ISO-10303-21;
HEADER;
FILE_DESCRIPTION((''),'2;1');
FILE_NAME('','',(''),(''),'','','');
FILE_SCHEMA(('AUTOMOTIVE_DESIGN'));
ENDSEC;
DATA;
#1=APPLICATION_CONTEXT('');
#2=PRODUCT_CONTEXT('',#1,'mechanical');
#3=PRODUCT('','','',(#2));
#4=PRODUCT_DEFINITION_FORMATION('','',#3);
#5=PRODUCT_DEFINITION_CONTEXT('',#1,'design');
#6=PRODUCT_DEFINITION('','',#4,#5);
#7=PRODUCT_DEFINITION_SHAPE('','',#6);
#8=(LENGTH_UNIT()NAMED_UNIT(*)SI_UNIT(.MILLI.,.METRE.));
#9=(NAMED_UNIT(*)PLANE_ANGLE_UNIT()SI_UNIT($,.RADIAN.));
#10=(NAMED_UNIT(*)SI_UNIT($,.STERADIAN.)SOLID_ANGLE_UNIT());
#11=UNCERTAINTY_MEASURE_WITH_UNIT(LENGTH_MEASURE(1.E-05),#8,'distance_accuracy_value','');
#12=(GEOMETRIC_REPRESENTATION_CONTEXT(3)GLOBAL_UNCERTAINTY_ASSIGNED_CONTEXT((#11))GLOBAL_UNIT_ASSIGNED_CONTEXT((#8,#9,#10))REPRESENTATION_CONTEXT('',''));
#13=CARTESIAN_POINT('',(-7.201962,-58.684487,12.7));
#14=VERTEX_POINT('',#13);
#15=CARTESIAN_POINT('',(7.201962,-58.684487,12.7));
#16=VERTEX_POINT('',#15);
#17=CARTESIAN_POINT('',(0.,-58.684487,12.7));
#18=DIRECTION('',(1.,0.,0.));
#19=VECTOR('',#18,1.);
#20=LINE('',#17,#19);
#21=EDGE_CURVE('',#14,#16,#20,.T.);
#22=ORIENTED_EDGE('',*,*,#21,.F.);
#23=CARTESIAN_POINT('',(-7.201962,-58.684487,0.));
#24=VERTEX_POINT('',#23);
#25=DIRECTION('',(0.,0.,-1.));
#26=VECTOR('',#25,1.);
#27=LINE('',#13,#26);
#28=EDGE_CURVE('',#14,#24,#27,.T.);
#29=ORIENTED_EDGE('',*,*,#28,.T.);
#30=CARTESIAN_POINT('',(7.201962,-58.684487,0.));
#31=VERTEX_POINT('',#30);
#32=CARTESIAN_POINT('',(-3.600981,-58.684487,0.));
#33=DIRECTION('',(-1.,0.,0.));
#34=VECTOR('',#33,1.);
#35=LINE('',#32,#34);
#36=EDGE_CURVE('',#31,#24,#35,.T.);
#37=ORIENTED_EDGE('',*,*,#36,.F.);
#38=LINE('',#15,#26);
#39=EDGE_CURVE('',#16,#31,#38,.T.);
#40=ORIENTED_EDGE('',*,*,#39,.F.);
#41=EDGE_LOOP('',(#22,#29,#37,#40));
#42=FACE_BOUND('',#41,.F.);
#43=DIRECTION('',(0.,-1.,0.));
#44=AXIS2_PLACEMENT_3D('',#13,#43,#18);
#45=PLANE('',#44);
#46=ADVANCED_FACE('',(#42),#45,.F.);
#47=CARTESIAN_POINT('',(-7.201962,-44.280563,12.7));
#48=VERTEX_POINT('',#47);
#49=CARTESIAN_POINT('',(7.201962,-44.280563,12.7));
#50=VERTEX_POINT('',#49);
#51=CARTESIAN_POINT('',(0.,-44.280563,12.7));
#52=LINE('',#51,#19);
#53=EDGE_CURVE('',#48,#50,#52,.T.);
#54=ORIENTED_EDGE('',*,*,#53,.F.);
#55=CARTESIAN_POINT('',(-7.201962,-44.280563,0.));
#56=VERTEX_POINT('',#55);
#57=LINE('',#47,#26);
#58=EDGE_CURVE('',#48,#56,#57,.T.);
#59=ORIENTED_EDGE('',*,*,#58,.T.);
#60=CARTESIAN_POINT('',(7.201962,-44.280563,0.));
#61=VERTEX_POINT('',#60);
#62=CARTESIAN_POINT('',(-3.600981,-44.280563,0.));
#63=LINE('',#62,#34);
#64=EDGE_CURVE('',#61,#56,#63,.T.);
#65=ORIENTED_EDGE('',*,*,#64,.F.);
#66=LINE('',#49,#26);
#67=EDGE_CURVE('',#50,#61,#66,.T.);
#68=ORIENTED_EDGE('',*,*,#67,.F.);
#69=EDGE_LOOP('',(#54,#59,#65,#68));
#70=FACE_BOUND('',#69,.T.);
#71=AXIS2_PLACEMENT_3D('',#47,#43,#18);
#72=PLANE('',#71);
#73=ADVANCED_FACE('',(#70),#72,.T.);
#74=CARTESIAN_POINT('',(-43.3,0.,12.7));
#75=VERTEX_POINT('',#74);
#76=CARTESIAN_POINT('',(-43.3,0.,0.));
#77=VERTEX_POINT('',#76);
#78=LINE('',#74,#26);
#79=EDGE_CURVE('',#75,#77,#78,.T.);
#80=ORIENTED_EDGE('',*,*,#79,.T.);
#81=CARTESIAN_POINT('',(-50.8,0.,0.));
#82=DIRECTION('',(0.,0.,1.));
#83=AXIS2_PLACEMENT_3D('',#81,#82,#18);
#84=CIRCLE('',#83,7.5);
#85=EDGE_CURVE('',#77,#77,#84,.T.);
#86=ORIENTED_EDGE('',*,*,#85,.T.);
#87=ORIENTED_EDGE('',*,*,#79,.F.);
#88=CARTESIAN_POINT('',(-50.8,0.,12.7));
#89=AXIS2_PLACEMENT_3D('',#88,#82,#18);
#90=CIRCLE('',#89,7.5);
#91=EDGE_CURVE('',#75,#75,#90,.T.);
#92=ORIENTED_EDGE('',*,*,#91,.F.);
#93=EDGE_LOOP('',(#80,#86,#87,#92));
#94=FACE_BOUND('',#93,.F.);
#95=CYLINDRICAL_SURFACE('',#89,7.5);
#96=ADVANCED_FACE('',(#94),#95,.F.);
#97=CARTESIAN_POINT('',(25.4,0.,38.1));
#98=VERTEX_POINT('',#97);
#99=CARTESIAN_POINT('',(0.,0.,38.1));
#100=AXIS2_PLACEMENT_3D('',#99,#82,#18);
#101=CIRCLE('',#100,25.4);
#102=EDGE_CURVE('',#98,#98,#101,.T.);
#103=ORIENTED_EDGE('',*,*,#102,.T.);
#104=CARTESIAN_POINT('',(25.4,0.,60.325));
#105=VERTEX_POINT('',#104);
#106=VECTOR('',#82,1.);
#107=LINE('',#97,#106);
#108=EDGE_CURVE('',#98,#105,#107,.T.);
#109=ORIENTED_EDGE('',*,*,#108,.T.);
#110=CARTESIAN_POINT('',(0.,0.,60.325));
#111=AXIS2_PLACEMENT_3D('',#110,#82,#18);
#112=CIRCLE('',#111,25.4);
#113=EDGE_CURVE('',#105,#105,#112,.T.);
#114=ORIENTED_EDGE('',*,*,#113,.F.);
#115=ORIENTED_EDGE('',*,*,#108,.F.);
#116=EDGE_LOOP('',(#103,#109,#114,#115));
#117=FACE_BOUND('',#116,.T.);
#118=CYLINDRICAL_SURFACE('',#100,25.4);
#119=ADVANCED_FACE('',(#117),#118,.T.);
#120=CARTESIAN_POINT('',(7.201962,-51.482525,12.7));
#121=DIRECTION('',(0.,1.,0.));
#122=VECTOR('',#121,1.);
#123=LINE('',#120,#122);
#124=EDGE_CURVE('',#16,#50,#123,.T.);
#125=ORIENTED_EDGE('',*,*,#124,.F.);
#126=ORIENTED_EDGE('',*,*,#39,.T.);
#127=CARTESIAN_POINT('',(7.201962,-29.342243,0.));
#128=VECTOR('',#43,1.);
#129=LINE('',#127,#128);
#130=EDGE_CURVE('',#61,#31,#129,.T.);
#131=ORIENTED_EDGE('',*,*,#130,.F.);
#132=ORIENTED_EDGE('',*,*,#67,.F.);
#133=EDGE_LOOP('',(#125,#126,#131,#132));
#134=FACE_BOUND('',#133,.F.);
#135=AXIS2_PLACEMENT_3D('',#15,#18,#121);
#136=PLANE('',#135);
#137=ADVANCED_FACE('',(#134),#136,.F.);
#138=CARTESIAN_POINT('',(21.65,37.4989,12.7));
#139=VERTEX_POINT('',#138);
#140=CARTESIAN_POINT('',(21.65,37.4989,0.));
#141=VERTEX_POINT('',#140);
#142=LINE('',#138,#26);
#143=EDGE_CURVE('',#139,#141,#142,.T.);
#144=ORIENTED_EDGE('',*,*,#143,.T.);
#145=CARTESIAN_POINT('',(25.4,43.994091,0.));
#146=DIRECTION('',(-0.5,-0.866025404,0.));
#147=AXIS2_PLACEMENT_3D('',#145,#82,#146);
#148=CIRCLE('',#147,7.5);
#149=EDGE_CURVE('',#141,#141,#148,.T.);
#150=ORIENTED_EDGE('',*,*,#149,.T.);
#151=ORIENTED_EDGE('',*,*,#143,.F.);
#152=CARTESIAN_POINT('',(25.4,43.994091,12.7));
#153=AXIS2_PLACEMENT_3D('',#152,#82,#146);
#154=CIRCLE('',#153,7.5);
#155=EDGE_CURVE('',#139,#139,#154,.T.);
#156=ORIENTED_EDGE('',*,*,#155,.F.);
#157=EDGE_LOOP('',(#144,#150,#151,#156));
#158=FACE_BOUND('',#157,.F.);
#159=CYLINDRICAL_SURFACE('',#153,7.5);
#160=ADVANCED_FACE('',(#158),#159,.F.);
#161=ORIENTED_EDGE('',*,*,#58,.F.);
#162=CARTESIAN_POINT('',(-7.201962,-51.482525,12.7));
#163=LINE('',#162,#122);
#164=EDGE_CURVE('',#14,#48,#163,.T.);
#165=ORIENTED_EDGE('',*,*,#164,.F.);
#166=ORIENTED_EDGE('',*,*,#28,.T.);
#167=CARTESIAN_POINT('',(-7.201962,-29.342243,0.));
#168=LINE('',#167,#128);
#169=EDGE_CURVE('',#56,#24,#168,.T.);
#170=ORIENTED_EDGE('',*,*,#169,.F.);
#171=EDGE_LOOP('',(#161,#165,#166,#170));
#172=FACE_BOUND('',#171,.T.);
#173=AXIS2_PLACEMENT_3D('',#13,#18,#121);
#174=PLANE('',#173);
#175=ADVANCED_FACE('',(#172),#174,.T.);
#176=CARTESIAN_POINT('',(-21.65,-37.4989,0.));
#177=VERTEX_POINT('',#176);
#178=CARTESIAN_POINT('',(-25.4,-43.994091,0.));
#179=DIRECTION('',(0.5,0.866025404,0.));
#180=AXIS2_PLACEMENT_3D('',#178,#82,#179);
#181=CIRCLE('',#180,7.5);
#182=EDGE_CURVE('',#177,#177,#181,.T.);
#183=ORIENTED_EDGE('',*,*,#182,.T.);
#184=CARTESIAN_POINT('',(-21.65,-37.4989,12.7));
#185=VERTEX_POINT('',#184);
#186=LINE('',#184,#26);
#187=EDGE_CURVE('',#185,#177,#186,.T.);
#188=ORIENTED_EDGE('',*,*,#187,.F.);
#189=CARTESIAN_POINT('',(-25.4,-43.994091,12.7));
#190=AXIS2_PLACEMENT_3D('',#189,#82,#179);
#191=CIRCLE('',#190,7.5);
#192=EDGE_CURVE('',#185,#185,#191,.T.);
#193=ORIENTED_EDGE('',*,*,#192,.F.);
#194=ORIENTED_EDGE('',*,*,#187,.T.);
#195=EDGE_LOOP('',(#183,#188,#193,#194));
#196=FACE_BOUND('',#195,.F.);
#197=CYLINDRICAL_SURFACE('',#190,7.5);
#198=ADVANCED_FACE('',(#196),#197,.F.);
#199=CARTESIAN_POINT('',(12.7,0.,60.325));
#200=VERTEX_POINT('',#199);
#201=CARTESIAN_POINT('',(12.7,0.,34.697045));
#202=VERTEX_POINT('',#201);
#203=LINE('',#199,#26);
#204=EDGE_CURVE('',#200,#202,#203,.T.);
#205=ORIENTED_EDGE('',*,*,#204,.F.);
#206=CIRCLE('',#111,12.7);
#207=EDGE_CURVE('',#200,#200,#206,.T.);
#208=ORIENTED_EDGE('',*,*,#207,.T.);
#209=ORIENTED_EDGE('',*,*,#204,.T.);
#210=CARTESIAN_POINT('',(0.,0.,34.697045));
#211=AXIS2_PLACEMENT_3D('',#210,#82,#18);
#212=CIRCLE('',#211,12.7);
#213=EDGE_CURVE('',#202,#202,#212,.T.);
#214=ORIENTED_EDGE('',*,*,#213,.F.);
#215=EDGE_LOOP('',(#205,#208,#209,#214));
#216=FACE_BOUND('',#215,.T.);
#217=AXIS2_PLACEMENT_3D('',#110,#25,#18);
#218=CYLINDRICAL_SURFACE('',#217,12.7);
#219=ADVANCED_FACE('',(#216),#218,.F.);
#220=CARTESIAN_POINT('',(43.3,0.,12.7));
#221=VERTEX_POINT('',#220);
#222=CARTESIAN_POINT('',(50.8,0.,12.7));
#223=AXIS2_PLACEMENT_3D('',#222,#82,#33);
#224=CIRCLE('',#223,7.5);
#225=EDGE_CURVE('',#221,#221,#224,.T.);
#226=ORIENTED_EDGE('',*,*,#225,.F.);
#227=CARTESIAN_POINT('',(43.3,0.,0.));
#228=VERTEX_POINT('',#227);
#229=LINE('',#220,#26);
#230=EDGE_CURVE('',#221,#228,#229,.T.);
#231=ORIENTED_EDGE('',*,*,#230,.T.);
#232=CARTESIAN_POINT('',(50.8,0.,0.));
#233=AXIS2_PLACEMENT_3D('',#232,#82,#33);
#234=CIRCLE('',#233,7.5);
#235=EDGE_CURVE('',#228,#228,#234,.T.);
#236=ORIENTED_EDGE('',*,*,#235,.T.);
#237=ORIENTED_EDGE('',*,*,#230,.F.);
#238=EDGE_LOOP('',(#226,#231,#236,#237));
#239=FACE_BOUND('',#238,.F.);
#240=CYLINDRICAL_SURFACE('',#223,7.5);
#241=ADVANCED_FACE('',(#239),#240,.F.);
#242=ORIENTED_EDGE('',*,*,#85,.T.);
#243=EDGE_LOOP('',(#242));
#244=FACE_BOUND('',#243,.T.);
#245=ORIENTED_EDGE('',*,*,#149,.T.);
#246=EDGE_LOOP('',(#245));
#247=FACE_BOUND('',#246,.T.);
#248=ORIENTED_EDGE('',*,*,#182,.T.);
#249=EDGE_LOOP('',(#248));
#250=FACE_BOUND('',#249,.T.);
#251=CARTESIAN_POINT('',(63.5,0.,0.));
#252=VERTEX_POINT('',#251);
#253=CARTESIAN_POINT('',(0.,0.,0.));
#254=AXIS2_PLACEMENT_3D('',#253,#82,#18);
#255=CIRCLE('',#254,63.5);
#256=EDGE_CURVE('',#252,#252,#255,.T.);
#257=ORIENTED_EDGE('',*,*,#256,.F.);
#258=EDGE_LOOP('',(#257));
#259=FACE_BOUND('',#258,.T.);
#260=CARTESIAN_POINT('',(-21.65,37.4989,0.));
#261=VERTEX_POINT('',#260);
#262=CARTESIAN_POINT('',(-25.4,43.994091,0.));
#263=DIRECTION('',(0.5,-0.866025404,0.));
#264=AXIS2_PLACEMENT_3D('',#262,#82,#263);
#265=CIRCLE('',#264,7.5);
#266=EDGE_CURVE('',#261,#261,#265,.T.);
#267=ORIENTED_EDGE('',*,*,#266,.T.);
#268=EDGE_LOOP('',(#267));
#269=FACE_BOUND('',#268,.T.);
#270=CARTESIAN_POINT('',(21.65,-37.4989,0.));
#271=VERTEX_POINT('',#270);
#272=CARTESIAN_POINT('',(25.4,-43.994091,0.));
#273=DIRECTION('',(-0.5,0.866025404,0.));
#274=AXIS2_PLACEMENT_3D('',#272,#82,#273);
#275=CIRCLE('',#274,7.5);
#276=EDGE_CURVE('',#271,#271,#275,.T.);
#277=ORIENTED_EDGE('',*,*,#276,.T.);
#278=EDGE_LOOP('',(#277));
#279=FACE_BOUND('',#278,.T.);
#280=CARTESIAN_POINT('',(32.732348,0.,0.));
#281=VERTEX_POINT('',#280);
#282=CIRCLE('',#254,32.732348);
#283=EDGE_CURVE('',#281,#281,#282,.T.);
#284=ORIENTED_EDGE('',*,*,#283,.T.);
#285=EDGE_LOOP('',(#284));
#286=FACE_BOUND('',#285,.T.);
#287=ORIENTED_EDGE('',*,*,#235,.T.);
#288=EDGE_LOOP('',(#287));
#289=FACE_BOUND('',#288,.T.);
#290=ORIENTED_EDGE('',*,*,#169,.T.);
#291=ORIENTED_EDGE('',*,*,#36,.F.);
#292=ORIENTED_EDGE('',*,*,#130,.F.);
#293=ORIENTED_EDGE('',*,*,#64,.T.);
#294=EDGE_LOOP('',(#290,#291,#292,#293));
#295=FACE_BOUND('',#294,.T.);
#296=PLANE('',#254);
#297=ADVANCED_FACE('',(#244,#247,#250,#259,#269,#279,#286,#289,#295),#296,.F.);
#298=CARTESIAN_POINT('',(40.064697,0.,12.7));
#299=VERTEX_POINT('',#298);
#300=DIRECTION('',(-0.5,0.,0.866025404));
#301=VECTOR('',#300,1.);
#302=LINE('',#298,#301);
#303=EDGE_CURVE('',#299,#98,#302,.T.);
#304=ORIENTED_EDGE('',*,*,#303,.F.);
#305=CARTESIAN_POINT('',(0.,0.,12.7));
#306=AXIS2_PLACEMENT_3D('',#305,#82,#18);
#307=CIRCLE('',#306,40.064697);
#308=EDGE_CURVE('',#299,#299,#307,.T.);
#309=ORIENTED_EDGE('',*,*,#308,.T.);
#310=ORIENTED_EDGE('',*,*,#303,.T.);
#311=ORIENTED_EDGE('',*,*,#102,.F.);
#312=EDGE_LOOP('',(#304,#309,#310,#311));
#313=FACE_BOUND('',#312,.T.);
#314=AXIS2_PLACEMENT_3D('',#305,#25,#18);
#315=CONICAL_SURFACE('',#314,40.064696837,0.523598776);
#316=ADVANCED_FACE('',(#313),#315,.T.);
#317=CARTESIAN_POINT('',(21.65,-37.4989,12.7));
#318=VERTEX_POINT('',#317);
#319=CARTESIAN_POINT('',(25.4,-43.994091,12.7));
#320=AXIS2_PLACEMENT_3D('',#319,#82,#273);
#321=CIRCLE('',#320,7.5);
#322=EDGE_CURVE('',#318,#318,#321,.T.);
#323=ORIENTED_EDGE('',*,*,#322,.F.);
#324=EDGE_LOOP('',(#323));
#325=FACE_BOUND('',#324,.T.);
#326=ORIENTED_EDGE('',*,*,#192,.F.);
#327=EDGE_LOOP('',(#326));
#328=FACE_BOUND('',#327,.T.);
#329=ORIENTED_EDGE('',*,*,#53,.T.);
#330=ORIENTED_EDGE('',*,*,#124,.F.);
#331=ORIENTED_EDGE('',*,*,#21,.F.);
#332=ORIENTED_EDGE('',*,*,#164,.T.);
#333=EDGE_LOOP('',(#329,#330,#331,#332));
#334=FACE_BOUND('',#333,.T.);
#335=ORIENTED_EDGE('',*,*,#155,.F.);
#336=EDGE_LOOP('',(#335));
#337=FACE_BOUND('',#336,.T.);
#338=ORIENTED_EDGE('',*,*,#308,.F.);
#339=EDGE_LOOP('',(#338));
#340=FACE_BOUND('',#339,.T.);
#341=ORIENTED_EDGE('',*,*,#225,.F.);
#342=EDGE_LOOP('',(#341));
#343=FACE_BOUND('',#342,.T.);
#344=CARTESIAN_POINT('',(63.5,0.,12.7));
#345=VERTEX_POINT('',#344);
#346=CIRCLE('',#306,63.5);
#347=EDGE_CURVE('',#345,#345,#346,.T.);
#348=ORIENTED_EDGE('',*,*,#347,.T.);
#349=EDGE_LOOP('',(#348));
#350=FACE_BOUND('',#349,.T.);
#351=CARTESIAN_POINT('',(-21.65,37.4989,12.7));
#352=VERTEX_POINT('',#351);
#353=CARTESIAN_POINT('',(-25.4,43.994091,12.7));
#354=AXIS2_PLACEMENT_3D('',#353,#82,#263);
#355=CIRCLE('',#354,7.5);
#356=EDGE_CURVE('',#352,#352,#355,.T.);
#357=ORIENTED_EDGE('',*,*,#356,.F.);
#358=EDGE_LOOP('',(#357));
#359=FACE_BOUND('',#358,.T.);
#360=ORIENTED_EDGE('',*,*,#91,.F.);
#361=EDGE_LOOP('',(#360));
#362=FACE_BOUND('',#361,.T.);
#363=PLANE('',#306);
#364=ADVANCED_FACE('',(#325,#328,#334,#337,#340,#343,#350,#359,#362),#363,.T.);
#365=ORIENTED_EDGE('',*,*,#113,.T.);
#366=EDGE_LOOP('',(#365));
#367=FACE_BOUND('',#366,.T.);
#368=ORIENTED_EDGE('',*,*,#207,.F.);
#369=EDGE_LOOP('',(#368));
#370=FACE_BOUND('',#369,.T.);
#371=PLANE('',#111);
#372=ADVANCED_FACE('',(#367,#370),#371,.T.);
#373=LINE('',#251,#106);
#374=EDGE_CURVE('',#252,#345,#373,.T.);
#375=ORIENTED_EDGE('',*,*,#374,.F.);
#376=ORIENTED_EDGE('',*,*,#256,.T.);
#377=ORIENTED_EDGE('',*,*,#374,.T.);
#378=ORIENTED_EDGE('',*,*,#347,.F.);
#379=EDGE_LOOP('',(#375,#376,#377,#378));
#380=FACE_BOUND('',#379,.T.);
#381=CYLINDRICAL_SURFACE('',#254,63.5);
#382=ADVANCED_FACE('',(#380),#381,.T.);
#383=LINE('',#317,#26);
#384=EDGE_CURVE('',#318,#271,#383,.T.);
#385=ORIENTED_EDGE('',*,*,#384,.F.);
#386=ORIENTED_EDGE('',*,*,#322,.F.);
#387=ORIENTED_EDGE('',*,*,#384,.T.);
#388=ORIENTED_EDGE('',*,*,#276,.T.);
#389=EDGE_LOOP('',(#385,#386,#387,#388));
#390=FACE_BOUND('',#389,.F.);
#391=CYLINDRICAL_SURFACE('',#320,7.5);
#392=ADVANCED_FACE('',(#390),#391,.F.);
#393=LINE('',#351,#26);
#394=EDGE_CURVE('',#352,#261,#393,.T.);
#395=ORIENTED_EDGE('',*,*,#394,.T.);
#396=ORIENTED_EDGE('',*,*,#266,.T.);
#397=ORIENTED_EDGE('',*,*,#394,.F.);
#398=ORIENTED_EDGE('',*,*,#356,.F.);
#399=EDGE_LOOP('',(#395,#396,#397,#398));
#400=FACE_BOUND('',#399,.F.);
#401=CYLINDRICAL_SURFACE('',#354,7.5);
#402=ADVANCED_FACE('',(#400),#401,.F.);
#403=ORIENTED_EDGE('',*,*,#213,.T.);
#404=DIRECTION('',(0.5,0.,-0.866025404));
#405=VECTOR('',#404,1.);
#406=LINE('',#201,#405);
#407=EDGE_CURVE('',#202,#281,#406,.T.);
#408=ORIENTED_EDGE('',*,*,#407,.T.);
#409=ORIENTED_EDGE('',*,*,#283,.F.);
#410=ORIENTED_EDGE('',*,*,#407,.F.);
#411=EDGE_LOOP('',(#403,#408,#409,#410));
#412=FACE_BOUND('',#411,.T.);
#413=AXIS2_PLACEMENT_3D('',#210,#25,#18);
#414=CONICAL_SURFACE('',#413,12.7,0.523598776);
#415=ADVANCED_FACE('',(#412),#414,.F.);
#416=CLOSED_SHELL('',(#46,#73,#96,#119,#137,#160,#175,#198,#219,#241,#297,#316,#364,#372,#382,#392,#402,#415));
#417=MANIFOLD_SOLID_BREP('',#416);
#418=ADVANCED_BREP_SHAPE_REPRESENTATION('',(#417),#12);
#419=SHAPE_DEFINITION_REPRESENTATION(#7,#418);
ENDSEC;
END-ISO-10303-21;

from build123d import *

# Parameters (mm, degrees)
F2_R            = 7.5
F3_DEPTH        = 12.701
F3_COPIES_COUNT = 6
F4_W            = 14.403924346
F4_H            = 14.403924346
F5_DEPTH        = 12.701


# Not quite as in the source:
# - a pattern or mirror of a feature is missing from the dataset's text; its kind, count and spacing are read off the source's solid


with BuildPart() as f1:
    # F0 (on Front) → F1 (revolve)
    with BuildSketch(Plane.XZ):
        Polygon((25.4, 60.325), (12.7, 60.325), (12.7, 34.6970452561), (32.7323484187, 0), (63.5, 0), (63.5, 12.7), (40.0646968374, 12.7), (25.4, 38.1), align=None)
    revolve(axis=Axis((0, 0, 18.9653343184), (0, 0, 1)))

    # F2 (on face) → F3 (cut, through all)
    with BuildSketch(Plane.XY.offset(12.7)):
        with Locations((-50.8, 0)):
            Circle(F2_R)
    f3 = extrude(amount=-F3_DEPTH, mode=Mode.SUBTRACT)

    # F3_copies: F3 ×6 about axis
    f3_copies_axis = Axis((0, 0, 0), (0, 0, 1))
    for i in range(1, F3_COPIES_COUNT):
        add(f3.rotate(f3_copies_axis, i * 360 / F3_COPIES_COUNT), mode=Mode.SUBTRACT)

    # F4 (on face) → F5 (cut, through all)
    with BuildSketch(Plane.XY.offset(12.7)):
        with Locations((0, -51.4825247228)):
            Rectangle(F4_W, F4_H)
    extrude(amount=-F5_DEPTH, mode=Mode.SUBTRACT)


solid = f1.part
